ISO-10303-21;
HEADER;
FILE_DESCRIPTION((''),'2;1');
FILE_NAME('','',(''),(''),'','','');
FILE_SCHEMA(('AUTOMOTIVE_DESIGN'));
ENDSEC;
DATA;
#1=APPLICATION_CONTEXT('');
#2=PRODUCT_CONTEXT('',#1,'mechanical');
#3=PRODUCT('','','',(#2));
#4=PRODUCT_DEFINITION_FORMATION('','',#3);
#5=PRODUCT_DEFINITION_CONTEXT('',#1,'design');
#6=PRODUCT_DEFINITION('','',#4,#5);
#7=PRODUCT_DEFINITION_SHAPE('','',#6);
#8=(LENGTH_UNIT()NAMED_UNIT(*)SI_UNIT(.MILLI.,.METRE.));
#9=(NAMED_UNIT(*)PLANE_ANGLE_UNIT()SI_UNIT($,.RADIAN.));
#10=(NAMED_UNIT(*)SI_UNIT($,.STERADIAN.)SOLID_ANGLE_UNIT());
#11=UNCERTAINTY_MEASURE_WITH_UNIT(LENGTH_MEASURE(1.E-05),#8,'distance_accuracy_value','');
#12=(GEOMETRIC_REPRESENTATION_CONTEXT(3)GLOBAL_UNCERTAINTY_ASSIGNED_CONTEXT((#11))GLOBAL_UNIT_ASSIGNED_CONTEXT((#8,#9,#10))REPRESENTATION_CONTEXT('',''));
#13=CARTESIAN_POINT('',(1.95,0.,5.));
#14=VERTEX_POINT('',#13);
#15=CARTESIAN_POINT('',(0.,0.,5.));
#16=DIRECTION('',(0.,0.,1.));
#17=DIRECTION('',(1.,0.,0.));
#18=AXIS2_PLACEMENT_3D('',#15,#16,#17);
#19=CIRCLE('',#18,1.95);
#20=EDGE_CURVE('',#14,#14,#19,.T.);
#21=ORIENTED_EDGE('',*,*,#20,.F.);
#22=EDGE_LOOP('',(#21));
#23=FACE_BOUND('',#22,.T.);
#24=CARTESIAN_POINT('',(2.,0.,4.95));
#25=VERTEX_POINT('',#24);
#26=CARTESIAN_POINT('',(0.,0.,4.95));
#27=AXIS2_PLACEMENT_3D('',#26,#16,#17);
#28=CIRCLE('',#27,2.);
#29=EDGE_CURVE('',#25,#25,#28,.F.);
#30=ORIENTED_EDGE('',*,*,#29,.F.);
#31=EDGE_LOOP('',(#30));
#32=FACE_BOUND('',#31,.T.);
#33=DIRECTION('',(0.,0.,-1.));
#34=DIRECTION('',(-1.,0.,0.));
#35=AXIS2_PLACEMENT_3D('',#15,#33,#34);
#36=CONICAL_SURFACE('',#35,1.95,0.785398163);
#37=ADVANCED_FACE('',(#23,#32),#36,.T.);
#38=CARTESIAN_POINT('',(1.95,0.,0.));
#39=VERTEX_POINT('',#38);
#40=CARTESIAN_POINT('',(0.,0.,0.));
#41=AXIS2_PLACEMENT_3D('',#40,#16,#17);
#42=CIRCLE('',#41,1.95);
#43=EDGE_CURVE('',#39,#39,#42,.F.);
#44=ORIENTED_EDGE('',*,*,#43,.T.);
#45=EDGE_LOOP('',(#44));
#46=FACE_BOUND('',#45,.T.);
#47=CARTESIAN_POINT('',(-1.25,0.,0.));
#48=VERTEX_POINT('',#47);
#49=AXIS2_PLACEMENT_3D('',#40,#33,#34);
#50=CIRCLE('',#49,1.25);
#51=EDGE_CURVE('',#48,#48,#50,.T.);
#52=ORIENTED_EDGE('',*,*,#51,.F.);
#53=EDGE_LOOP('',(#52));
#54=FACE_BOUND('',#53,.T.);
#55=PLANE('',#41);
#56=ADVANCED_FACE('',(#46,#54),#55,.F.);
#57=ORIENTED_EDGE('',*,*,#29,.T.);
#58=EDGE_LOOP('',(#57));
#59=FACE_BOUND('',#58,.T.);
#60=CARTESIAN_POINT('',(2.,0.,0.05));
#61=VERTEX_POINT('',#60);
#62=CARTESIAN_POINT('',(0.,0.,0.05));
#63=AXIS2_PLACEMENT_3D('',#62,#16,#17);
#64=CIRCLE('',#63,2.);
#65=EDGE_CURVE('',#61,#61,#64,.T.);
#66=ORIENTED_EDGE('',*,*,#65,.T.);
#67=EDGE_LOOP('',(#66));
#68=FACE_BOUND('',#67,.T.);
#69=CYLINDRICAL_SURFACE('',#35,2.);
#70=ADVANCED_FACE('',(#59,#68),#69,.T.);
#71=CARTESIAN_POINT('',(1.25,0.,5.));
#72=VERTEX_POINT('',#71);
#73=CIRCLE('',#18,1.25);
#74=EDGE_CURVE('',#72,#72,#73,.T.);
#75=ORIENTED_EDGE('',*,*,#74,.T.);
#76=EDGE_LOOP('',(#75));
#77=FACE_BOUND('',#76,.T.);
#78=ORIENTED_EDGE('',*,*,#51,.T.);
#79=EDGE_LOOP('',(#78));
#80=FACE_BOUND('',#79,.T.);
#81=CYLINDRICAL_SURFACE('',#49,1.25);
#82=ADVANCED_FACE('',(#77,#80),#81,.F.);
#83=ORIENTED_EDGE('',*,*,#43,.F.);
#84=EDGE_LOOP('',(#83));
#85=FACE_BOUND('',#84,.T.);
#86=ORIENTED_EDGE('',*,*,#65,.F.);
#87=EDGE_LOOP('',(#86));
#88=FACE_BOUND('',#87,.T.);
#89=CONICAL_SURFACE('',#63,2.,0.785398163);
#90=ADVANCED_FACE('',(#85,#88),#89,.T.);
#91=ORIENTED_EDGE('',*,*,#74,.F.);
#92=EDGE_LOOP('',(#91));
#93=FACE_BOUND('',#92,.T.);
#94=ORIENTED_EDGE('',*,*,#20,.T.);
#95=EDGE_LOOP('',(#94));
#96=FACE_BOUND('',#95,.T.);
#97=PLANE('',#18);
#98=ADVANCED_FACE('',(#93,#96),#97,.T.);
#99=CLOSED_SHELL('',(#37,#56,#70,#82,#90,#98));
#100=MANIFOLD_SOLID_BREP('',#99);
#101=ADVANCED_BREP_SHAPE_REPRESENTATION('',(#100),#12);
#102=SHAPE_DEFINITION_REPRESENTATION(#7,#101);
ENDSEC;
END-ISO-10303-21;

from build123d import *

# Parameters (mm, degrees)
ESQUISSE1_R              = 2
ESQUISSE1_R_2            = 1.06
EXTRUSION1_DEPTH         = 5
CHANFREIN1_SIZE          = 0.05
SUPPRIMERFACE1_OUTLINE_R = 1.06
SUPPRIMERFACE1_DEPTH     = 5
TROU_TARAUD_M31_D        = 2.5


# Read off the part's stored shape, not the designer's step: SupprimerFace1
with BuildPart() as part:
    # Esquisse1 → Extrusion1 (new body)
    with BuildSketch(Plane.XY):
        Circle(ESQUISSE1_R)
        Circle(ESQUISSE1_R_2, mode=Mode.SUBTRACT)
    extrude(amount=EXTRUSION1_DEPTH)

    # Chanfrein1
    chanfrein1_edges = [part.edges().sort_by_distance(p)[0] for p in [
        (-2, 0, 0),
        (-2, 0, 5),
    ]]
    chamfer(chanfrein1_edges, length=CHANFREIN1_SIZE)

    # SupprimerFace1 outline → SupprimerFace1 (add)
    with BuildSketch(Plane.XY):
        Circle(SUPPRIMERFACE1_OUTLINE_R)
    extrude(amount=SUPPRIMERFACE1_DEPTH)

    # Trou taraudé M31 (through all)
    with Locations(Plane(origin=(0, 0, 0), x_dir=(-1, 0, 0), z_dir=(0, 0, -1))):
        with Locations((0, 0)):
            Hole(TROU_TARAUD_M31_D / 2)


solid = part.part
